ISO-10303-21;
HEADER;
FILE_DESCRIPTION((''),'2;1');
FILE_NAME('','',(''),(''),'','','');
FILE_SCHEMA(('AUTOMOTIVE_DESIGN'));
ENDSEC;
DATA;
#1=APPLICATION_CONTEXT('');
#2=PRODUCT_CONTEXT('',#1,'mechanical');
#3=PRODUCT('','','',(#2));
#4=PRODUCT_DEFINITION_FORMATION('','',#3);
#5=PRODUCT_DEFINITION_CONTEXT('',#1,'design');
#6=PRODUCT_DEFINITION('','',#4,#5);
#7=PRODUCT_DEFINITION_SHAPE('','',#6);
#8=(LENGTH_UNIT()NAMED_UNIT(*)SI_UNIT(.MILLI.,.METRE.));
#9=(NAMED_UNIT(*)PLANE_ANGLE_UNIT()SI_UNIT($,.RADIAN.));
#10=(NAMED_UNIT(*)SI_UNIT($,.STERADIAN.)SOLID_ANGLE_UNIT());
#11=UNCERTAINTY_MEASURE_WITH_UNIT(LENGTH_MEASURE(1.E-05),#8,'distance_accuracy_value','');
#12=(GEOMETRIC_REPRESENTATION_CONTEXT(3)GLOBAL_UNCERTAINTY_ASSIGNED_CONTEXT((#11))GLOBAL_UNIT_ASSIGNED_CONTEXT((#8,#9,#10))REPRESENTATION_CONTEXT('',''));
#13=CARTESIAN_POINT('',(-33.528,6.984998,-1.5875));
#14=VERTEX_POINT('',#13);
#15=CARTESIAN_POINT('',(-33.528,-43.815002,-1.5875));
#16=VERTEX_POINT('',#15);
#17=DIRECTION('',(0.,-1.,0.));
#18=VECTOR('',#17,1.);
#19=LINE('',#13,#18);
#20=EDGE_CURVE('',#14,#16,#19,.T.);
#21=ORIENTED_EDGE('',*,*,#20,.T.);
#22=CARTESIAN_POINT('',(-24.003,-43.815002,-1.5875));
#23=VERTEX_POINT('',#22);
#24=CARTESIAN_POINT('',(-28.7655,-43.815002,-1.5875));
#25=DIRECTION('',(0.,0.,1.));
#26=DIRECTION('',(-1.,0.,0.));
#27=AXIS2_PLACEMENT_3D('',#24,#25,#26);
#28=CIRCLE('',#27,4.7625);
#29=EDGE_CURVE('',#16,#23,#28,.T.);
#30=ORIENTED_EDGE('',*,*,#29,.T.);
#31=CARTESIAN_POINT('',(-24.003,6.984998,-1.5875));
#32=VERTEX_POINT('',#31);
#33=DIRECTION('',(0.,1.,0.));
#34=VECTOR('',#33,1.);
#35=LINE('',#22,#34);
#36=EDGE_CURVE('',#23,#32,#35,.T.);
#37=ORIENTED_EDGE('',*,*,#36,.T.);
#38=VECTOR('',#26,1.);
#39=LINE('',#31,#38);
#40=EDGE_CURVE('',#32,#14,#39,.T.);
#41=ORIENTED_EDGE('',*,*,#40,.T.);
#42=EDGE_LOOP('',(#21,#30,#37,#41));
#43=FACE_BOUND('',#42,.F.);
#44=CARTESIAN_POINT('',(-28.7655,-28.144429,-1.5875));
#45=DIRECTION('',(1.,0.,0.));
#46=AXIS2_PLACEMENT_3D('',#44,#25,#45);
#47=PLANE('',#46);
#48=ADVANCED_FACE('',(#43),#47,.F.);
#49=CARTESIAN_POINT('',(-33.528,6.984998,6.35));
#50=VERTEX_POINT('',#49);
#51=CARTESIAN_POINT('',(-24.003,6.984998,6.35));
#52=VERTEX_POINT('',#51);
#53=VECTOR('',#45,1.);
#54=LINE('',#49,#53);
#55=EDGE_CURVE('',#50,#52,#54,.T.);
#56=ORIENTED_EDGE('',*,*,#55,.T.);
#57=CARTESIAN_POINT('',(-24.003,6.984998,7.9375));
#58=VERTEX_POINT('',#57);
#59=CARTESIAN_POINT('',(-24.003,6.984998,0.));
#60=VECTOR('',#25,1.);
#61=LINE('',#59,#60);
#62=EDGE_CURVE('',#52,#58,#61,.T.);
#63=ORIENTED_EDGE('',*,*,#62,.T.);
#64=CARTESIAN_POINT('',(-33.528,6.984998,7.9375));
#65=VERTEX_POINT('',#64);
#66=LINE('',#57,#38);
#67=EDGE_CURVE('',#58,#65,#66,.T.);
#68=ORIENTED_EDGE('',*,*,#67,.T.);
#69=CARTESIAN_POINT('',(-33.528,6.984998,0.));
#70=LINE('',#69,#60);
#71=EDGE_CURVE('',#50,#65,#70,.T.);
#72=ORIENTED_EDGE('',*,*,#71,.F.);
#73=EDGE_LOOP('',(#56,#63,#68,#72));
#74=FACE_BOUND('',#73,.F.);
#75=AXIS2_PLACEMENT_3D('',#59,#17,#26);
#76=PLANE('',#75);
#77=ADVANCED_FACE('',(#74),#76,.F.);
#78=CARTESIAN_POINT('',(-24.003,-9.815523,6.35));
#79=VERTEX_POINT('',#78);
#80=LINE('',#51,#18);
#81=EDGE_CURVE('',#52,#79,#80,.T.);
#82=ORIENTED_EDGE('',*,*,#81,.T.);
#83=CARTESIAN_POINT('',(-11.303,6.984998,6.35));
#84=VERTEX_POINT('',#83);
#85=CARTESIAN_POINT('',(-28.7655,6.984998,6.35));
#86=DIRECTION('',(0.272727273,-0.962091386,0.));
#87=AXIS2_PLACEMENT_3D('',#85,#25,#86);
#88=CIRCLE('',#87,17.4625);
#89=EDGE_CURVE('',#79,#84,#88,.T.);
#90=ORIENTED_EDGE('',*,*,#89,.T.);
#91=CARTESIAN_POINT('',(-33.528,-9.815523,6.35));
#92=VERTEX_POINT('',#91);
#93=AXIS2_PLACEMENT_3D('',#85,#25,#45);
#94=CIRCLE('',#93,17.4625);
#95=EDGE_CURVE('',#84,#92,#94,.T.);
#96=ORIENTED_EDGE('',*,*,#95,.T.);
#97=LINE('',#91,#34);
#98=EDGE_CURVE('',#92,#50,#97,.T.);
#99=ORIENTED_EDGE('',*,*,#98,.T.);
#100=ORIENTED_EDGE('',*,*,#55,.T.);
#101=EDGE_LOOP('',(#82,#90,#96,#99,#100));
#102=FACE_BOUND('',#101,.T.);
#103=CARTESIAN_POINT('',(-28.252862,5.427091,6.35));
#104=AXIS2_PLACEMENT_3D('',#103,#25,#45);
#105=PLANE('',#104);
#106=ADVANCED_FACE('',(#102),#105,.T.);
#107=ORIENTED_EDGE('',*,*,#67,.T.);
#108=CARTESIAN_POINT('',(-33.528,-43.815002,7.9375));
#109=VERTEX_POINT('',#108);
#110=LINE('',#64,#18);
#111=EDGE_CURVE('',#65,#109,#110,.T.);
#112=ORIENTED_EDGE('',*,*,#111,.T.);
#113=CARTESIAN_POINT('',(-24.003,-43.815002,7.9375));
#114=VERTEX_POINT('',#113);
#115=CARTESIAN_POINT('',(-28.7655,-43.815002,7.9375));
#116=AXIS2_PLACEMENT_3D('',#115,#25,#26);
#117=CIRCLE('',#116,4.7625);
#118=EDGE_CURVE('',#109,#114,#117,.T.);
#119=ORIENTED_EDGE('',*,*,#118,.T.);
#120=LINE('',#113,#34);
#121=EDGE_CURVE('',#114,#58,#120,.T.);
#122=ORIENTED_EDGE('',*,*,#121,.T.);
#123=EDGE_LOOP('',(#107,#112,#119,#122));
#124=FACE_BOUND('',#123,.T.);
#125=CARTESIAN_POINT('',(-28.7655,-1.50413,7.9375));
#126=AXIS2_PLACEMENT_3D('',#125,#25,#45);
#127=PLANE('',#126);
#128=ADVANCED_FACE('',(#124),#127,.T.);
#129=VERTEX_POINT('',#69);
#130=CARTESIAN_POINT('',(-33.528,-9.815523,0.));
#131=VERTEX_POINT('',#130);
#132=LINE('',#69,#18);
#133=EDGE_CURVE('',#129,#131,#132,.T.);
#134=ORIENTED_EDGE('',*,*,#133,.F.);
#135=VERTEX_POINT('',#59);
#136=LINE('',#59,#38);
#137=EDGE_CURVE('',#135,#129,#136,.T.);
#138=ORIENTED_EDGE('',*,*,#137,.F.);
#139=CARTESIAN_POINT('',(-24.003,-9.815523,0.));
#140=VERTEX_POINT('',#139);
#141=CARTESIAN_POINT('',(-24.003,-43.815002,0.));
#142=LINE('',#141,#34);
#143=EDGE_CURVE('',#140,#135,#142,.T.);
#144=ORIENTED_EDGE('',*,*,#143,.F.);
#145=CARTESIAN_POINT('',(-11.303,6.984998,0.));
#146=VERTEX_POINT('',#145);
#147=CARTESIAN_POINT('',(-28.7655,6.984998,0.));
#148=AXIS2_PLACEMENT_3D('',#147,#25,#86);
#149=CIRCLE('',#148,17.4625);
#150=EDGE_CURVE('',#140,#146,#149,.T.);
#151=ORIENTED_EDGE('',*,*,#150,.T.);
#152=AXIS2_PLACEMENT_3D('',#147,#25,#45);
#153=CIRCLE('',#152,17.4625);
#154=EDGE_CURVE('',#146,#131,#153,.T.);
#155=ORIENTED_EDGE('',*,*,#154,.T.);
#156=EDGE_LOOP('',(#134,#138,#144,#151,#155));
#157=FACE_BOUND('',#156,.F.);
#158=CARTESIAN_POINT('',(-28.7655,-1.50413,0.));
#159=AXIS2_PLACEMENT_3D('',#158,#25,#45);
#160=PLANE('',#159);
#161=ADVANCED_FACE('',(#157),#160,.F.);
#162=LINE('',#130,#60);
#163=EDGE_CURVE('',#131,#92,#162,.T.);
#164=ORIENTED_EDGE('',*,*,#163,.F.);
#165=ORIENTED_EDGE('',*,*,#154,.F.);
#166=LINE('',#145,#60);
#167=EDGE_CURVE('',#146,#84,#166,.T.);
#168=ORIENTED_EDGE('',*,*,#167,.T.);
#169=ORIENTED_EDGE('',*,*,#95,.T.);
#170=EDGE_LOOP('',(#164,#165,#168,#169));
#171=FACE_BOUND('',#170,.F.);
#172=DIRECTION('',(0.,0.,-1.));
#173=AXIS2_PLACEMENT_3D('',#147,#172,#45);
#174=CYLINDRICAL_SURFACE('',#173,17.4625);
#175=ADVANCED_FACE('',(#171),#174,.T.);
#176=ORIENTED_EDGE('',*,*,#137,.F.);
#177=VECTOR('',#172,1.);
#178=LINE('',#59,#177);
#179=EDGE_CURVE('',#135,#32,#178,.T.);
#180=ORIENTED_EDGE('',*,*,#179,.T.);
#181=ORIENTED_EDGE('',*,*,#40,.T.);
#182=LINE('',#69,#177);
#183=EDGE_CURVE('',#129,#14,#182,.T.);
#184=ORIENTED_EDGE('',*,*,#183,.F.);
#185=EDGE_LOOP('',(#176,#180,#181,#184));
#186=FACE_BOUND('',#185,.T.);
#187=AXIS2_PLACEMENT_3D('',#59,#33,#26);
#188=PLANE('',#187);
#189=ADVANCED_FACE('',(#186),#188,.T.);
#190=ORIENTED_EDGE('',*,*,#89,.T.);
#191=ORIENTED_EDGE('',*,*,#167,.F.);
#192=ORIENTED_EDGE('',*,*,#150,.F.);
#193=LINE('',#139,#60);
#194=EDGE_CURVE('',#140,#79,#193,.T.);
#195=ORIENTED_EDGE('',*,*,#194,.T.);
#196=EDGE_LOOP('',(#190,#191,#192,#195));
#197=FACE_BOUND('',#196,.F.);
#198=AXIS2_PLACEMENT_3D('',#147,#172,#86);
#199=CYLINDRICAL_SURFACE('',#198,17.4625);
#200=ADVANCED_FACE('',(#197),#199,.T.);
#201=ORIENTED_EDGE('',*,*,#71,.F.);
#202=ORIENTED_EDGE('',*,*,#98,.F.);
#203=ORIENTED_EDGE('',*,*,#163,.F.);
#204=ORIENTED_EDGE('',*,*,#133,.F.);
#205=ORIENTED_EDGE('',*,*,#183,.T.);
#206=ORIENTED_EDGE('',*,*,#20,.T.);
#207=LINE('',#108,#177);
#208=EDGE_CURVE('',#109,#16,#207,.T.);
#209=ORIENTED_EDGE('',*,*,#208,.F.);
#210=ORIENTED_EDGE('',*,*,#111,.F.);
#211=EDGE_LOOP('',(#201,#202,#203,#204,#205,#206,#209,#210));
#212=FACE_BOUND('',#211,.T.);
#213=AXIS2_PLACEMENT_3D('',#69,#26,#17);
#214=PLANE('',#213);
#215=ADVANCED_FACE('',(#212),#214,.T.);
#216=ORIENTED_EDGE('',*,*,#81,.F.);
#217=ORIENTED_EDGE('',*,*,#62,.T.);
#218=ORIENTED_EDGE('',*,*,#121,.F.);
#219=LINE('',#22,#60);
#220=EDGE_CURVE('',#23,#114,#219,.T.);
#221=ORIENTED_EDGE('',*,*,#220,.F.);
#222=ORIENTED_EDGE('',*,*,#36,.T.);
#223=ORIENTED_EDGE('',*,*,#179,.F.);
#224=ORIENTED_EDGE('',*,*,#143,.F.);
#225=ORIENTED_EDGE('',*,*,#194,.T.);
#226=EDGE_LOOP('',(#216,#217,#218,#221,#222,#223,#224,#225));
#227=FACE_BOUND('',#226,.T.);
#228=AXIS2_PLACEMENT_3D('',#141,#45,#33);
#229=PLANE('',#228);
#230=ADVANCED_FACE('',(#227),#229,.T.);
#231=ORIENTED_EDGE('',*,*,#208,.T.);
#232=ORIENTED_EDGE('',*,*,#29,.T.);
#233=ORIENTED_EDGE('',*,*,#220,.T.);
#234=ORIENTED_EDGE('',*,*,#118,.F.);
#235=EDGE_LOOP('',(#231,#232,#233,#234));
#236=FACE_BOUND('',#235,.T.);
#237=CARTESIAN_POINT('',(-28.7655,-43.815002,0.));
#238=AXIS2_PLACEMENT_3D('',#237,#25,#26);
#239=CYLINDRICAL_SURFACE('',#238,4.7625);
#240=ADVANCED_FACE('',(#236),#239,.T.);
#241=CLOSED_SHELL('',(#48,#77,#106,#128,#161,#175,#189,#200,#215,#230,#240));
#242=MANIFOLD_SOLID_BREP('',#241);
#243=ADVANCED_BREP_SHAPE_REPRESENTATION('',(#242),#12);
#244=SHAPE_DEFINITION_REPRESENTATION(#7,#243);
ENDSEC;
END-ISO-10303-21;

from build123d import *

# Parameters (mm, degrees)
F1_DEPTH = 6.35
F2_DEPTH = 7.9375
F3_DEPTH = 1.5875


# Not quite as in the source:
# - a length typed as a fraction of an inch, garbled in the dataset ("3 / 203.2 mm" for 3/8 in), is restored


with BuildPart() as f1:
    # F0 (on Top) → F1 (new body)
    with BuildSketch(Plane.XY):
        with BuildLine():
            ThreePointArc((-24.0030003875, -9.8155226706), (-14.8352444226, -3.5452855547), (-11.3030003875, 6.9849981546))
            ThreePointArc((-11.3030003875, 6.9849981546), (-39.2957840969, 20.9152541196), (-33.5280003875, -9.8155226706))
            Line((-33.5280003875, -9.8155226706), (-33.5280003875, 6.9849981546))
            Line((-33.5280003875, 6.9849981546), (-24.0030003875, 6.9849981546))
            Line((-24.0030003875, 6.9849981546), (-24.0030003875, -9.8155226706))
        make_face()
    extrude(amount=F1_DEPTH)

    # F0 (on Top) → F2 (join)
    with BuildSketch(Plane.XY):
        with BuildLine():
            Line((-33.5280003875, 6.9849981546), (-33.5280003875, -9.8155226706))
            ThreePointArc((-33.5280003875, -9.8155226706), (-28.7655003875, -10.4775018454), (-24.0030003875, -9.8155226706))
            Line((-24.0030003875, -9.8155226706), (-24.0030003875, 6.9849981546))
            Line((-24.0030003875, 6.9849981546), (-33.5280003875, 6.9849981546))
        make_face()
        with BuildLine():
            ThreePointArc((-24.0030003875, -9.8155226706), (-28.7655003875, -10.4775018454), (-33.5280003875, -9.8155226706))
            Line((-33.5280003875, -9.8155226706), (-33.5280003875, -43.8150018454))
            ThreePointArc((-33.5280003875, -43.8150018454), (-28.7655003875, -48.5775018454), (-24.0030003875, -43.8150018454))
            Line((-24.0030003875, -43.8150018454), (-24.0030003875, -9.8155226706))
        make_face()
    extrude(amount=F2_DEPTH)

    # F0 (on Top) → F3 (join)
    with BuildSketch(Plane.XY):
        with BuildLine():
            ThreePointArc((-24.0030003875, -9.8155226706), (-28.7655003875, -10.4775018454), (-33.5280003875, -9.8155226706))
            Line((-33.5280003875, -9.8155226706), (-33.5280003875, -43.8150018454))
            ThreePointArc((-33.5280003875, -43.8150018454), (-28.7655003875, -48.5775018454), (-24.0030003875, -43.8150018454))
            Line((-24.0030003875, -43.8150018454), (-24.0030003875, -9.8155226706))
        make_face()
        with BuildLine():
            Line((-33.5280003875, 6.9849981546), (-33.5280003875, -9.8155226706))
            ThreePointArc((-33.5280003875, -9.8155226706), (-28.7655003875, -10.4775018454), (-24.0030003875, -9.8155226706))
            Line((-24.0030003875, -9.8155226706), (-24.0030003875, 6.9849981546))
            Line((-24.0030003875, 6.9849981546), (-33.5280003875, 6.9849981546))
        make_face()
    extrude(amount=-F3_DEPTH)


solid = f1.part
